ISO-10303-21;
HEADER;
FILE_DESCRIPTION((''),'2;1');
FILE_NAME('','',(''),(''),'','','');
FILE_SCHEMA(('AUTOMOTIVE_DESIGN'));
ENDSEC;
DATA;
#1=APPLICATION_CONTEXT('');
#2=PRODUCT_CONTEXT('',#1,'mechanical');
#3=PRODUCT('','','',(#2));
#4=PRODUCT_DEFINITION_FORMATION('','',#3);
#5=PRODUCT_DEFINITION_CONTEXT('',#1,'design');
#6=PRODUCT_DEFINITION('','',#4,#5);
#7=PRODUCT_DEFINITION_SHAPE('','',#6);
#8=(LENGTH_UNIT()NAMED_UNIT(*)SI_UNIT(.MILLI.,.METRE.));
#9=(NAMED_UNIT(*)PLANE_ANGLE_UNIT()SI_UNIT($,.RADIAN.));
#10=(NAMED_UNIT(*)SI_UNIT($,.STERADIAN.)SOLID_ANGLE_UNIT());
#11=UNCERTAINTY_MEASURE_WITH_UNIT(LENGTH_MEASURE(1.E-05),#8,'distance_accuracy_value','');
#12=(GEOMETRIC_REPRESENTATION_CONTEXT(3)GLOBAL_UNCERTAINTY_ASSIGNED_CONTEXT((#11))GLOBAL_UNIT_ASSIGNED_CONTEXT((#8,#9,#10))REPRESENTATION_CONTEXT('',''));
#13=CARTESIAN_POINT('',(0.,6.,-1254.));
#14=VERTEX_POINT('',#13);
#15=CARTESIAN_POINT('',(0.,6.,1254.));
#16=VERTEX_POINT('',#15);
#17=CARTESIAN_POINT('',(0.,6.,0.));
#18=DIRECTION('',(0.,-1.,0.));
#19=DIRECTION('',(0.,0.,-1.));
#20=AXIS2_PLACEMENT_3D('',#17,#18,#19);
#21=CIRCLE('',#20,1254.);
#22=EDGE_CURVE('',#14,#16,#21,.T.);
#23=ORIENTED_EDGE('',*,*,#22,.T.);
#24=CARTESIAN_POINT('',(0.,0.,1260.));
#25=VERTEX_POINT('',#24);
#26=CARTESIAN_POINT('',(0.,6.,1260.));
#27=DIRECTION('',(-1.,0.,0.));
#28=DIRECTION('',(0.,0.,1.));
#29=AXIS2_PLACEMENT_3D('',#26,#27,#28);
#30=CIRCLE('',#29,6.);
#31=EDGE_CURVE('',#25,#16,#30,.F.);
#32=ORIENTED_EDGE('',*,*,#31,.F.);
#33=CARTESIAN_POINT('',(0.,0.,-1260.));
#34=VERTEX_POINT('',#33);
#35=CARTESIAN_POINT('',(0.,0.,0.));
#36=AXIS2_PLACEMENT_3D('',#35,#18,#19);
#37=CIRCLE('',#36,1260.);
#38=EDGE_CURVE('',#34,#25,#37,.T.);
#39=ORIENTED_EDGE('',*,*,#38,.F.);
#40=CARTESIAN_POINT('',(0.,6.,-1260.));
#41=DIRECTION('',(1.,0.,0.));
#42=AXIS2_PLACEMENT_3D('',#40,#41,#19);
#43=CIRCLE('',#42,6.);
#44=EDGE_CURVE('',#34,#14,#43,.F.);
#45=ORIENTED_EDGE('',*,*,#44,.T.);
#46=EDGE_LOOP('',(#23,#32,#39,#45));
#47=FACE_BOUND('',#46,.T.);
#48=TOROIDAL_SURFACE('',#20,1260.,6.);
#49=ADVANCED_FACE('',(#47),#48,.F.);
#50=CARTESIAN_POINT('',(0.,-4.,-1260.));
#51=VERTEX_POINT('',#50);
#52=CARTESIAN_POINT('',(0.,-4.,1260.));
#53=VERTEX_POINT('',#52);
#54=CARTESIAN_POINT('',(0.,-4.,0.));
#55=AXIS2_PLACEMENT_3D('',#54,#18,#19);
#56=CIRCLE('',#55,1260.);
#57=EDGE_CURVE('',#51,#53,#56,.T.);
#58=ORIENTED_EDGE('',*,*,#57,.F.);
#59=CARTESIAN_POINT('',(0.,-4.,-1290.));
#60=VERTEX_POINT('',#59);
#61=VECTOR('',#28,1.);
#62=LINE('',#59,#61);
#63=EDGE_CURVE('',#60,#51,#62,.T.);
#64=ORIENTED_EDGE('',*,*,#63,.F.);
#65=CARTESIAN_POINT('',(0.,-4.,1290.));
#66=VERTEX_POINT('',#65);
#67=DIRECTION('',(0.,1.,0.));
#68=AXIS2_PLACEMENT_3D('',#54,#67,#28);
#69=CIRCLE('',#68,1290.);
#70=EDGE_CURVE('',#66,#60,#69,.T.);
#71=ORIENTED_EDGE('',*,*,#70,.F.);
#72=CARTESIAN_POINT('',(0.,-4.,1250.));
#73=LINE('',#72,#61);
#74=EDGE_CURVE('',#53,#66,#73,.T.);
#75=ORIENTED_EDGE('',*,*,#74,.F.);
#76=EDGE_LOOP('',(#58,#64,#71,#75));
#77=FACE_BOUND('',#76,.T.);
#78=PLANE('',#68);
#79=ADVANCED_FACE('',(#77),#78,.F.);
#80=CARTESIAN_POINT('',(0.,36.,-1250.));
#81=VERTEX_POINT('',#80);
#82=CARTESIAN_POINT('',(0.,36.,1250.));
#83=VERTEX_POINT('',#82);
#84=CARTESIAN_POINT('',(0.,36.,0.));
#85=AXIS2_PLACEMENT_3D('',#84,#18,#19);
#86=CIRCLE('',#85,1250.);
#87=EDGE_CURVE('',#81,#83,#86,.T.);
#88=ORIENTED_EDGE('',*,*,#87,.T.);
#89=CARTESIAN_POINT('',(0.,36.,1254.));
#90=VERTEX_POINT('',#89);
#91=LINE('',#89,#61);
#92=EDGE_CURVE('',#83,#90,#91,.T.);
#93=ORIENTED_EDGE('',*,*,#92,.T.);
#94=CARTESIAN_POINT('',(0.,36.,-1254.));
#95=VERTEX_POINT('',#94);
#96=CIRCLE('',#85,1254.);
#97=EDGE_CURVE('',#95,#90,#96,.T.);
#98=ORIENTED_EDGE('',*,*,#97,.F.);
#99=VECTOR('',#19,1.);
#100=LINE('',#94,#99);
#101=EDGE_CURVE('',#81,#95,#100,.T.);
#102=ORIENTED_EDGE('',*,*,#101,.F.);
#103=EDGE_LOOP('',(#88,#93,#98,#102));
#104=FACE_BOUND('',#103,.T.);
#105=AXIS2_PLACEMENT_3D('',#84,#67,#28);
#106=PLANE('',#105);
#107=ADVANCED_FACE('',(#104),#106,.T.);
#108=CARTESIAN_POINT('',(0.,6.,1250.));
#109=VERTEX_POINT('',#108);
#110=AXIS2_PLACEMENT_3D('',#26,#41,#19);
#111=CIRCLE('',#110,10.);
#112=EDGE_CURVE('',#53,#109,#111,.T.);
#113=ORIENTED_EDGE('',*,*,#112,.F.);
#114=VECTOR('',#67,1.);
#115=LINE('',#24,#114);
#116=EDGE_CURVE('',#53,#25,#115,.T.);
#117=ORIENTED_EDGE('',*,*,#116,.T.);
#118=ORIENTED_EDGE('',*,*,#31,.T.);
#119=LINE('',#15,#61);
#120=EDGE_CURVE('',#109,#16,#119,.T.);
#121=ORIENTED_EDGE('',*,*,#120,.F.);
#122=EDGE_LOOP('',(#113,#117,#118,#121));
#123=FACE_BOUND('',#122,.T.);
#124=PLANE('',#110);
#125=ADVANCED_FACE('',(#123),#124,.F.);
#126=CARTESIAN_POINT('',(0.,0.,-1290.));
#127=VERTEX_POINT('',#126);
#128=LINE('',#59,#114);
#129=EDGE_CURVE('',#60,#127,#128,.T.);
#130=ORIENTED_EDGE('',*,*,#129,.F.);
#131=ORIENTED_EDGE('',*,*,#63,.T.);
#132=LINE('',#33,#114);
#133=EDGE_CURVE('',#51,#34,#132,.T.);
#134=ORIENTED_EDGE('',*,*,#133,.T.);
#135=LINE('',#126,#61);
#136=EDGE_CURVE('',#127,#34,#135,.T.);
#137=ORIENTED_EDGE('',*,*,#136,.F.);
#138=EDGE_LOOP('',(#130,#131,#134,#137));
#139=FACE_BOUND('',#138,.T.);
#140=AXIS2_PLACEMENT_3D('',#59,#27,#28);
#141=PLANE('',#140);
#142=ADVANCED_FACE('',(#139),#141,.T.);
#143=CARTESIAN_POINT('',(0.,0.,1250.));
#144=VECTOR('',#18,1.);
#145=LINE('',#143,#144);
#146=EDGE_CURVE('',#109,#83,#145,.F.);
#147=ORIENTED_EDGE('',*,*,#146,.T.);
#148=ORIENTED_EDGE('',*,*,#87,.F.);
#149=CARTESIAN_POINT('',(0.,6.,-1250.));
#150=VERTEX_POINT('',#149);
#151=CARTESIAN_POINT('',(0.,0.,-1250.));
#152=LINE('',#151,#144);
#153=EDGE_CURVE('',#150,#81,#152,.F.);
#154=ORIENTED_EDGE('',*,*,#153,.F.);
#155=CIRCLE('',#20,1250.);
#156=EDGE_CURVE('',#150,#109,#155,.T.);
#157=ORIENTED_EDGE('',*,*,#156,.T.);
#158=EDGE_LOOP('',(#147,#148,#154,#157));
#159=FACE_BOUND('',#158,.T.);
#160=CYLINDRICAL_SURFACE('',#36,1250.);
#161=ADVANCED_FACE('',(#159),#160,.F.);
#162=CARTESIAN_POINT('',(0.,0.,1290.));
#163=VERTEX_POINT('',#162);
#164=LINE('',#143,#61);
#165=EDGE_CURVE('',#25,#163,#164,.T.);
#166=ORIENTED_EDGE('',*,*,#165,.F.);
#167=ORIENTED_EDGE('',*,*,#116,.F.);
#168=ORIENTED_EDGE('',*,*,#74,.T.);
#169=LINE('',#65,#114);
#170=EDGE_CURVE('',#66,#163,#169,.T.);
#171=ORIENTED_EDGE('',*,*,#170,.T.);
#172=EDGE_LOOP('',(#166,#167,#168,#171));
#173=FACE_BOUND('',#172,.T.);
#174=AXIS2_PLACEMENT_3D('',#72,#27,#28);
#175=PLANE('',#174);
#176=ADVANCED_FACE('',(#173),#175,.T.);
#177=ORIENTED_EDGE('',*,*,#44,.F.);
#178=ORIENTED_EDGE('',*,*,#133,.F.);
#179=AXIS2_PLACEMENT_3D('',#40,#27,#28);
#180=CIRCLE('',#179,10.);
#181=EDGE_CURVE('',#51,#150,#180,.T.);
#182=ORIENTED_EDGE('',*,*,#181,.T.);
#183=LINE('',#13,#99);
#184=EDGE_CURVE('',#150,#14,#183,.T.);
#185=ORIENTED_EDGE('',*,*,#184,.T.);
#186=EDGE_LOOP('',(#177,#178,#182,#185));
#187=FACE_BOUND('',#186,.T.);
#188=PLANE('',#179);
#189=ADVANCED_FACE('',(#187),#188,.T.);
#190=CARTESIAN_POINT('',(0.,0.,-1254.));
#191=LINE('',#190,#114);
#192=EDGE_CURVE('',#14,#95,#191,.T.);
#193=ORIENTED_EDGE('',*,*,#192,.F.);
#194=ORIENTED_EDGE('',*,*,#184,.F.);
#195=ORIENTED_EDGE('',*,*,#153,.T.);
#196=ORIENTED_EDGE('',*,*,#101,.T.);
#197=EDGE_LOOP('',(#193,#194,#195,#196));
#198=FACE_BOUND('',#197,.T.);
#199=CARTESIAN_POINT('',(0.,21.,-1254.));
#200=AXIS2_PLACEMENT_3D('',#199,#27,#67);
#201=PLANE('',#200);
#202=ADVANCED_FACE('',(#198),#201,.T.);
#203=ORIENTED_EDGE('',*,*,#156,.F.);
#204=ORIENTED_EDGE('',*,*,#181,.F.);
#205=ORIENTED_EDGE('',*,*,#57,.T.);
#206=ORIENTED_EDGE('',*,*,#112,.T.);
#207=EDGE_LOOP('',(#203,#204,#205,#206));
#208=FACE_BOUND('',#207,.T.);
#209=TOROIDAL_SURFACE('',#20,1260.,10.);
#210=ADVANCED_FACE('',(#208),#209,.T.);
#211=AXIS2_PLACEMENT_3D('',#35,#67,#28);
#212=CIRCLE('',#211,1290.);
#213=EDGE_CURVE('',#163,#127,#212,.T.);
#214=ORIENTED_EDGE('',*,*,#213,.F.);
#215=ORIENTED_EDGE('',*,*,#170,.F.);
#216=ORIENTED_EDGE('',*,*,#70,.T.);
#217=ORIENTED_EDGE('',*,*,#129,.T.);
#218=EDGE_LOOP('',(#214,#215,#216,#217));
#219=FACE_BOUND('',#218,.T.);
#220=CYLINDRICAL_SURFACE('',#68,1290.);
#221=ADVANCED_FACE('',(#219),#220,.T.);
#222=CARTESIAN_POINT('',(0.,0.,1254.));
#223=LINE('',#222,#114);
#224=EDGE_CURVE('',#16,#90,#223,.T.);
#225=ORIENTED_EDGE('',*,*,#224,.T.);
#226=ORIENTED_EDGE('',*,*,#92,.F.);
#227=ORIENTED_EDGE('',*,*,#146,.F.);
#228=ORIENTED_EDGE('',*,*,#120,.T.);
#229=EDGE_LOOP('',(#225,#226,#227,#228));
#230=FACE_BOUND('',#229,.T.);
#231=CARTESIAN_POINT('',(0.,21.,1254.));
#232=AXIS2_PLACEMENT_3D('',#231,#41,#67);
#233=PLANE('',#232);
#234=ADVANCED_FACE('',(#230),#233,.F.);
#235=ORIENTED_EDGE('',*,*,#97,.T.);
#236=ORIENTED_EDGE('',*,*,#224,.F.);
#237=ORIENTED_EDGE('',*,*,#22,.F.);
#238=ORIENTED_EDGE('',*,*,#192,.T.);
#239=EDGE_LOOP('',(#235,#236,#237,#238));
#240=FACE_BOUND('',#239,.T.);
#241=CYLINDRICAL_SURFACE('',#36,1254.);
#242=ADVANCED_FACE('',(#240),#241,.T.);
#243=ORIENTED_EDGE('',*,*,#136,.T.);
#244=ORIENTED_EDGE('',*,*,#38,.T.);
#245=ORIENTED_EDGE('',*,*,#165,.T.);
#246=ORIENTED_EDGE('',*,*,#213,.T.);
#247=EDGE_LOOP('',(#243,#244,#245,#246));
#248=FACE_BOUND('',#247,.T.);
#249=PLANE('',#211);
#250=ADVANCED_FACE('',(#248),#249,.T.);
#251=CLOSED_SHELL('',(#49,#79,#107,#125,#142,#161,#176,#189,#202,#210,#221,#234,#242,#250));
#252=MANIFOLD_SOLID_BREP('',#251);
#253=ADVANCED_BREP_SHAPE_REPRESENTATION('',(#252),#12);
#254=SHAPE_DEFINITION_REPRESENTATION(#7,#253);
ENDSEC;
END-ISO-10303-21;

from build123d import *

# Parameters (mm, degrees)
BASE_FLANGE1_DEPTH   = 4
EDGE_FLANGE1_ANGLE   = 180
EDGE_FLANGE1_2_ANGLE = 180


# Read off the part's stored shape, not the designer's step: Edge-Flange1
# Sheet-metal steps are written as plain solids
with BuildPart() as part:
    # Sketch1 → Base-Flange1 (new body)
    with BuildSketch(Plane(origin=(0, 0, 0), x_dir=(1, 0, 0), z_dir=(0, 1, 0))):
        with BuildLine():
            Line((0, 1290), (0, 1250))
            ThreePointArc((0, 1250), (1250, 0), (0, -1250))
            Line((0, -1250), (0, -1290))
            ThreePointArc((0, -1290), (1290, 0), (0, 1290))
        make_face()
    extrude(amount=-BASE_FLANGE1_DEPTH)

    # Edge-Flange1 outline → Edge-Flange1 (revolve, cut)
    with BuildSketch(Plane.ZY):
        with BuildLine():
            Line((1252, 0), (1250, 0))
            Line((1250, 0), (1250, -4))
            Line((1250, -4), (1260, -4))
            ThreePointArc((1260, -4), (1255.527864045, -2.94427191), (1252, 0))
        make_face()
    revolve(axis=Axis((0, 0, 0), (0, 1, 0)), revolution_arc=EDGE_FLANGE1_ANGLE, mode=Mode.SUBTRACT)

    # Edge-Flange1 2 outline → Edge-Flange1 2 (revolve)
    with BuildSketch(Plane.ZY):
        with BuildLine():
            Line((1254, 36), (1250, 36))
            Line((1250, 36), (1250, 6))
            ThreePointArc((1250, 6), (1250.513167019, 2.83772234), (1252, 0))
            Line((1252, 0), (1260, 0))
            ThreePointArc((1260, 0), (1255.757359313, 1.757359313), (1254, 6))
            Line((1254, 6), (1254, 36))
        make_face()
    revolve(axis=Axis((0, 0, 0), (0, 1, 0)), revolution_arc=EDGE_FLANGE1_2_ANGLE)


solid = part.part
